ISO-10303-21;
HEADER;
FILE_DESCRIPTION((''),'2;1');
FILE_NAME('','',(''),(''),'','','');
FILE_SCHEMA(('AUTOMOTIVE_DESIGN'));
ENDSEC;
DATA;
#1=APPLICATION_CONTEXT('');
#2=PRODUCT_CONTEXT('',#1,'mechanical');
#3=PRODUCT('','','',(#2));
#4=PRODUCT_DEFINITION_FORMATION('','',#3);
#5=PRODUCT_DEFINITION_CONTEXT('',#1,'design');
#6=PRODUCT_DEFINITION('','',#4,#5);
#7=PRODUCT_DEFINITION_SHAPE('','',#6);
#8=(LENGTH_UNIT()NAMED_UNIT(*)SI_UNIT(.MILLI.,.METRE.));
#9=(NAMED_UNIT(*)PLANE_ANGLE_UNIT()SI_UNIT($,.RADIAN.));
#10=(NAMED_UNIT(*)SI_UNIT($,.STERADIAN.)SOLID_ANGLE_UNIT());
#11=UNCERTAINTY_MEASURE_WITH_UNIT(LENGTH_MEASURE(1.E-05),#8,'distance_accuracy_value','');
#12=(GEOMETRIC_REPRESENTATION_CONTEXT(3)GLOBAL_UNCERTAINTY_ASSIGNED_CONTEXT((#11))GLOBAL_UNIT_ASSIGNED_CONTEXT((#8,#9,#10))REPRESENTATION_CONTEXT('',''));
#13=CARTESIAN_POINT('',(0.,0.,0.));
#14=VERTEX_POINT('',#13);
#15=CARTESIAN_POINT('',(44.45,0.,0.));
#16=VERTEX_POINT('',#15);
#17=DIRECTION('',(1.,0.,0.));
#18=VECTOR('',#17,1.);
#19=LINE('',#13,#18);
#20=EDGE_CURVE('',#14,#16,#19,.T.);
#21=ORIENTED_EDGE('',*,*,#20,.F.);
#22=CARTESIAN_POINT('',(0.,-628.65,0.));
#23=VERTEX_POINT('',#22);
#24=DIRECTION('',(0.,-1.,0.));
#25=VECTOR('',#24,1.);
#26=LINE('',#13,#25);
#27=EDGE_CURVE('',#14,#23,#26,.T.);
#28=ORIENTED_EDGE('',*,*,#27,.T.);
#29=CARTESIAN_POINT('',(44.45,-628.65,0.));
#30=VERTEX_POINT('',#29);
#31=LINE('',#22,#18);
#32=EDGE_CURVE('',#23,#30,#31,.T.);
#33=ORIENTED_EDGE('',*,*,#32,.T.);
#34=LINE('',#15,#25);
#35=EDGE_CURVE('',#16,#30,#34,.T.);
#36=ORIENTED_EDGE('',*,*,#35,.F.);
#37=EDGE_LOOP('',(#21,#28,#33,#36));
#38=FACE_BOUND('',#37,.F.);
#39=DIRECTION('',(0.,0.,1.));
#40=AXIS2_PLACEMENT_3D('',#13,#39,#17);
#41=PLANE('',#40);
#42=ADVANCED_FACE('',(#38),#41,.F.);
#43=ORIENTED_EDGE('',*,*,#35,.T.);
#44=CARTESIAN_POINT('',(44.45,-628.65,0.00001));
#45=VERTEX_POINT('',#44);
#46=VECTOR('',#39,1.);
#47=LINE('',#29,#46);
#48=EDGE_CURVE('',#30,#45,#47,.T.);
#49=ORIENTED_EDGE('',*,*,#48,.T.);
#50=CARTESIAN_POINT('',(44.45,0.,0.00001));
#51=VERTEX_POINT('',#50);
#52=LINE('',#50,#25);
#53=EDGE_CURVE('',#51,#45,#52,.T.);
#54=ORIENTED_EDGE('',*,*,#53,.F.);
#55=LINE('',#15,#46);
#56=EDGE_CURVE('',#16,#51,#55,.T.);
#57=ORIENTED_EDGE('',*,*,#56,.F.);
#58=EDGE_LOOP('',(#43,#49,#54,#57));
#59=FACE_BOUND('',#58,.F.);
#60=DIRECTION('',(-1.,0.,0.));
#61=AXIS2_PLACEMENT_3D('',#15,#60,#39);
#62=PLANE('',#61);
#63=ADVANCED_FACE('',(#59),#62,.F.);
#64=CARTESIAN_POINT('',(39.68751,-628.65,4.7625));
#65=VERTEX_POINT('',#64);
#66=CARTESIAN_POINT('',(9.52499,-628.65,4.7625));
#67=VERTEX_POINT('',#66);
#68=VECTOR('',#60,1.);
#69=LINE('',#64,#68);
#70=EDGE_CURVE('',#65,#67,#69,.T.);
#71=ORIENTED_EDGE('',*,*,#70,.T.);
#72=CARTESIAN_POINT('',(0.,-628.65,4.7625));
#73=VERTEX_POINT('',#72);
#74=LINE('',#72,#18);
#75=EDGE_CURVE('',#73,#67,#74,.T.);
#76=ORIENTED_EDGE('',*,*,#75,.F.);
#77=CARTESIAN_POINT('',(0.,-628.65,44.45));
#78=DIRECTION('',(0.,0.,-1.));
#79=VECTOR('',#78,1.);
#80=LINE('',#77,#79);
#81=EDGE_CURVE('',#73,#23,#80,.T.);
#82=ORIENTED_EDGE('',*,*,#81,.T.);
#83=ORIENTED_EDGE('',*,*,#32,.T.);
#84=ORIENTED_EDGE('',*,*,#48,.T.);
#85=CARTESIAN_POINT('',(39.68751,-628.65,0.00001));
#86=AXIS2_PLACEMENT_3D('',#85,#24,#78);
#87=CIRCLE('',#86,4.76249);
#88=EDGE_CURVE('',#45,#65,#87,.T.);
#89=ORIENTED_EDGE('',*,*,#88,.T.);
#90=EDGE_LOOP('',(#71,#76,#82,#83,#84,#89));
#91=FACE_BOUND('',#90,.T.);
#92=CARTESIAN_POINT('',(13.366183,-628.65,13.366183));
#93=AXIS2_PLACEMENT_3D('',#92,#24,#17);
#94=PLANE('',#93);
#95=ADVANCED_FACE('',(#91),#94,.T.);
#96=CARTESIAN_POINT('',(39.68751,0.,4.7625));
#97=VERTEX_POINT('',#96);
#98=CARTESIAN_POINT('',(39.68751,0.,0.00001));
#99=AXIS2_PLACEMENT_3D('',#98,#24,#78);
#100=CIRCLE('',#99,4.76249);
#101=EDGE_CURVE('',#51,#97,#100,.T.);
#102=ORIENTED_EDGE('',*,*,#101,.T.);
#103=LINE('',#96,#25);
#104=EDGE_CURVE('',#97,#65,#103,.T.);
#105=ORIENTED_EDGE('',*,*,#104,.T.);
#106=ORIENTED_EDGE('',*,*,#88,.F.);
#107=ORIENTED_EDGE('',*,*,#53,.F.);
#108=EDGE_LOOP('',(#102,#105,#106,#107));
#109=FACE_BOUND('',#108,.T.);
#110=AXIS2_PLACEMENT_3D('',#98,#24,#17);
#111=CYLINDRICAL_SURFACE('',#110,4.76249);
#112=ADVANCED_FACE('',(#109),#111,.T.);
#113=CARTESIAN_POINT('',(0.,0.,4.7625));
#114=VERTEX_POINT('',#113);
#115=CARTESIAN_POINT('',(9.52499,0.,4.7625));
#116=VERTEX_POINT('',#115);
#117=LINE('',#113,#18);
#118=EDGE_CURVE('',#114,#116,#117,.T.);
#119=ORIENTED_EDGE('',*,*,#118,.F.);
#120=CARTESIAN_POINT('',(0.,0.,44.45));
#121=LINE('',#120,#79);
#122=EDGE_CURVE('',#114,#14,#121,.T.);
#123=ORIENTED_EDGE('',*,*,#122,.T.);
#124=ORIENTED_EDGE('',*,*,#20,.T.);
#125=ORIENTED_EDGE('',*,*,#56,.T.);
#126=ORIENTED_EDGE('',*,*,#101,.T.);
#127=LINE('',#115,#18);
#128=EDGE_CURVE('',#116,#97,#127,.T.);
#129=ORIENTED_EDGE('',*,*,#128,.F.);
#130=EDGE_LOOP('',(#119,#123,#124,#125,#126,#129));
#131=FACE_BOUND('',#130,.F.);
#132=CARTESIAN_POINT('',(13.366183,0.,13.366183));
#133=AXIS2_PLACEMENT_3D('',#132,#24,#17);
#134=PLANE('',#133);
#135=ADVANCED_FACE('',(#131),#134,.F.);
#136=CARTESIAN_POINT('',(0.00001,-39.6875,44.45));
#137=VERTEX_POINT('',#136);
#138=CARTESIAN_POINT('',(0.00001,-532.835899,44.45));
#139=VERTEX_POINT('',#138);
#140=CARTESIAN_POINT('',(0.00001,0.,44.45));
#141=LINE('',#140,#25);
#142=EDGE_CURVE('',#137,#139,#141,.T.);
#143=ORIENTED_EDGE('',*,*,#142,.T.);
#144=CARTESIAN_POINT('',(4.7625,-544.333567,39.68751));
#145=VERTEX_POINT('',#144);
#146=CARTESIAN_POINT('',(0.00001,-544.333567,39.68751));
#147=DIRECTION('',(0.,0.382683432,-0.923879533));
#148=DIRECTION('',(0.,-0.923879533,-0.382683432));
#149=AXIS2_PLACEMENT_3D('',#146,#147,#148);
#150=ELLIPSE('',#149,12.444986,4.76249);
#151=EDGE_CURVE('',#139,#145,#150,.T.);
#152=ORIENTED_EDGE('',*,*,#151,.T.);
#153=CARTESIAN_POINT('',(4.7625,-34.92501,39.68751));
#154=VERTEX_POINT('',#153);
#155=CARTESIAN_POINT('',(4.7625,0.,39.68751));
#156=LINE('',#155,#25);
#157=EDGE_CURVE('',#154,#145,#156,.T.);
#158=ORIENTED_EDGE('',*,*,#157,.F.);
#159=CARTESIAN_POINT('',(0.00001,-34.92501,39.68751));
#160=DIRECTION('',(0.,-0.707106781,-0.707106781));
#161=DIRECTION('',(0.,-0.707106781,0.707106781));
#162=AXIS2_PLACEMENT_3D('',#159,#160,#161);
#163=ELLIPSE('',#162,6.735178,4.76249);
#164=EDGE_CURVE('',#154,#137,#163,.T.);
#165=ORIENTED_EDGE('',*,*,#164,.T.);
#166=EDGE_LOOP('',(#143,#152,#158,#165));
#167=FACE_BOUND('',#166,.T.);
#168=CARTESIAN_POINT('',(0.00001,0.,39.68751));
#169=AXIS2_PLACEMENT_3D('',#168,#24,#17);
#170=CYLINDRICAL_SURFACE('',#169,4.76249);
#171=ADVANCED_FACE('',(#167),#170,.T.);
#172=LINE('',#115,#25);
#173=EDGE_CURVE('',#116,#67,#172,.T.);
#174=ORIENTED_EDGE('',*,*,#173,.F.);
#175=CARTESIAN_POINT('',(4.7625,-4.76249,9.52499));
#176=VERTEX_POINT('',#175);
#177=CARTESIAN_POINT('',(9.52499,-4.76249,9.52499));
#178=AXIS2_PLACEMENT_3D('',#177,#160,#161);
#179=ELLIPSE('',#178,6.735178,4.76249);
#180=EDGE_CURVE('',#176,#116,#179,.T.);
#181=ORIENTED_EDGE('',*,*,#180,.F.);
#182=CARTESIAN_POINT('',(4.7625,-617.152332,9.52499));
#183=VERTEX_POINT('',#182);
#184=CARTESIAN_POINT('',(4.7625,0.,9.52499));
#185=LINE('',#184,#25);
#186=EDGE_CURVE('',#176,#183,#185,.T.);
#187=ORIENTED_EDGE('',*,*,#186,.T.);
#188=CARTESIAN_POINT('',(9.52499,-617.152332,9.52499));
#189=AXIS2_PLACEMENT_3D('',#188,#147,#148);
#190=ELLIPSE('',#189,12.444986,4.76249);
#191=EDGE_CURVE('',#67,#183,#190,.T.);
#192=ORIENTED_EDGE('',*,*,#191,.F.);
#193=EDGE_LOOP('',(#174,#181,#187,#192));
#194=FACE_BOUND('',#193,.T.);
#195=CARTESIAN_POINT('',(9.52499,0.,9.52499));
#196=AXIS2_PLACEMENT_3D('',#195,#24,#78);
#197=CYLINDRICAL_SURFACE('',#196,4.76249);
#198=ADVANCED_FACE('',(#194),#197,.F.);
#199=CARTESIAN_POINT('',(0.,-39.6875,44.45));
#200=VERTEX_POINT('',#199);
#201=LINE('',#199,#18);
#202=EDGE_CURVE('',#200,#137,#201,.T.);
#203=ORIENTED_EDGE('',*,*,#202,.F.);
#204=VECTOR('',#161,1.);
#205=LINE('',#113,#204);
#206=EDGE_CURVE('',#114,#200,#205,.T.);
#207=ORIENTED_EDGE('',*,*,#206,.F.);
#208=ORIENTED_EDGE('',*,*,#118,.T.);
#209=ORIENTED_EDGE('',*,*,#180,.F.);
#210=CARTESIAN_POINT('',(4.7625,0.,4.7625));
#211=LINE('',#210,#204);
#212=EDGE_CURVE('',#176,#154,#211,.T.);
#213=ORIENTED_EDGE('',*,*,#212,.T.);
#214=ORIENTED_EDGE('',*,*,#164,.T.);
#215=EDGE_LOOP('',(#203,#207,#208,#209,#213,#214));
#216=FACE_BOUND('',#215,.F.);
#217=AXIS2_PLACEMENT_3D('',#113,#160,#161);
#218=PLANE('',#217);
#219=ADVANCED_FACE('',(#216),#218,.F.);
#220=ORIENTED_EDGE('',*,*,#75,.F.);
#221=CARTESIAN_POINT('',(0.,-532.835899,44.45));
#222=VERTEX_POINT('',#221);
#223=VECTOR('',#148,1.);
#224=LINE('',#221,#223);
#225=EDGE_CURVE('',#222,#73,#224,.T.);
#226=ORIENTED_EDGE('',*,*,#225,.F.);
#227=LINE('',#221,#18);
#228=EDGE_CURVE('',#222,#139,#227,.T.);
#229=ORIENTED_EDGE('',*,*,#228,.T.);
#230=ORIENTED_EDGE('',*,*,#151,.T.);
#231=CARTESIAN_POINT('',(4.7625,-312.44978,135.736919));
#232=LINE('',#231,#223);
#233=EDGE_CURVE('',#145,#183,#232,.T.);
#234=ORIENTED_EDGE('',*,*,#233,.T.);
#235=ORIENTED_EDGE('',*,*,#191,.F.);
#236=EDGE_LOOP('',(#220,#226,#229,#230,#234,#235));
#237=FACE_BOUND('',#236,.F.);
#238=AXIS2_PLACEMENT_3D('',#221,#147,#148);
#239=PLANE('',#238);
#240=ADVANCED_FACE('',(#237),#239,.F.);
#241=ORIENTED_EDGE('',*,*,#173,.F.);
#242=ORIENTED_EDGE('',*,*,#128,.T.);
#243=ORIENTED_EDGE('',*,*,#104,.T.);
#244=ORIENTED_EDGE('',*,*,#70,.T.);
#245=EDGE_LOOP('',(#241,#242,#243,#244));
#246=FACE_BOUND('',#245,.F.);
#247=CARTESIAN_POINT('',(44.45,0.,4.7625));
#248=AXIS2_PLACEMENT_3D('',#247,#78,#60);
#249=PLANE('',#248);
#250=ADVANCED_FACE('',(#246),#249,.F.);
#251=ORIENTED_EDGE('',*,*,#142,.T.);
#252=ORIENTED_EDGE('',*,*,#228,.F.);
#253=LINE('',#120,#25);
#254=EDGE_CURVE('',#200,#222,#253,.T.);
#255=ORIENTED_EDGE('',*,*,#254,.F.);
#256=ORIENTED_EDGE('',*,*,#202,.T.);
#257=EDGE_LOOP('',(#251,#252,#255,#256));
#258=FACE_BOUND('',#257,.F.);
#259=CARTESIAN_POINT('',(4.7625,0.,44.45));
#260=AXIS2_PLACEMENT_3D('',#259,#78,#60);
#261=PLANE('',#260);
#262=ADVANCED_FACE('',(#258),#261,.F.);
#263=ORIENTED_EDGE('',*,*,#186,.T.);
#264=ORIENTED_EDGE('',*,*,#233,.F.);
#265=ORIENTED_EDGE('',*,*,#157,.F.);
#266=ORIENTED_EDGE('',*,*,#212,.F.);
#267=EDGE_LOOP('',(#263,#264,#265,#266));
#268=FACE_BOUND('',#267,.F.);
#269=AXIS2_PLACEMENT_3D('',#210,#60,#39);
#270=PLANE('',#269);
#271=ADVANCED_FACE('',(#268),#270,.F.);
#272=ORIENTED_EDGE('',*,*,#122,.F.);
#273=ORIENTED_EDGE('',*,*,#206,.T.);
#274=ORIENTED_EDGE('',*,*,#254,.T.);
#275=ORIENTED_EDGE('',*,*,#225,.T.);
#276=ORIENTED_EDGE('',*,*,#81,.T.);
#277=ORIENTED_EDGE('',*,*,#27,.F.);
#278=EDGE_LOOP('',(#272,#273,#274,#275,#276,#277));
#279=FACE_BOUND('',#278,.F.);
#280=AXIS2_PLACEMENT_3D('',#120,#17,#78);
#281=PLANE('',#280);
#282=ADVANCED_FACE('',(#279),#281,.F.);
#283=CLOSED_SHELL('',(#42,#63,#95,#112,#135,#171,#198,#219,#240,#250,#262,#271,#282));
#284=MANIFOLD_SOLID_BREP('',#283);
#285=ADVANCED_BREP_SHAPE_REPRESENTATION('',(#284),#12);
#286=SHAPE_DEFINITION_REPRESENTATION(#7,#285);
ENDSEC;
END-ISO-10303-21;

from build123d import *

# Parameters (mm, degrees)
F1_DEPTH = 628.65
F2_R     = 4.76249
F4_DEPTH = 25.4


# Not quite as in the source:
# - a fillet or chamfer is up to 0.001 mm smaller than in the source, because OpenCascade refuses the exact size


with BuildPart() as f1:
    # F0 (on Front) → F1 (new body)
    with BuildSketch(Plane.XZ):
        Polygon((0, 44.45), (0, 0), (44.45, 0), (44.45, 4.7625), (4.7625, 4.7625), (4.7625, 44.45), align=None)
    extrude(amount=F1_DEPTH)

    # F2 (radius 4.7625 in the source; OpenCascade refuses exactly that, so slightly less here)
    f2_edges = [f1.edges().sort_by_distance(p)[0] for p in [
        (4.7625, -314.325, 4.7625),
        (4.7625, -314.325, 44.45),
        (44.45, -314.325, 4.7625),
    ]]
    fillet(f2_edges, radius=F2_R)

    # F3 (on face) → F4 (cut)
    with BuildSketch(Plane(origin=(0, 0, 0), x_dir=(0, -1, 0), z_dir=(-1, 0, 0))):
        Polygon((0, 44.45), (0, 4.7625), (39.6875, 44.45), align=None)
        Polygon((628.65, 44.45), (532.8358992433, 44.45), (628.65, 4.7625), align=None)
    extrude(amount=-F4_DEPTH, mode=Mode.SUBTRACT)


solid = f1.part
